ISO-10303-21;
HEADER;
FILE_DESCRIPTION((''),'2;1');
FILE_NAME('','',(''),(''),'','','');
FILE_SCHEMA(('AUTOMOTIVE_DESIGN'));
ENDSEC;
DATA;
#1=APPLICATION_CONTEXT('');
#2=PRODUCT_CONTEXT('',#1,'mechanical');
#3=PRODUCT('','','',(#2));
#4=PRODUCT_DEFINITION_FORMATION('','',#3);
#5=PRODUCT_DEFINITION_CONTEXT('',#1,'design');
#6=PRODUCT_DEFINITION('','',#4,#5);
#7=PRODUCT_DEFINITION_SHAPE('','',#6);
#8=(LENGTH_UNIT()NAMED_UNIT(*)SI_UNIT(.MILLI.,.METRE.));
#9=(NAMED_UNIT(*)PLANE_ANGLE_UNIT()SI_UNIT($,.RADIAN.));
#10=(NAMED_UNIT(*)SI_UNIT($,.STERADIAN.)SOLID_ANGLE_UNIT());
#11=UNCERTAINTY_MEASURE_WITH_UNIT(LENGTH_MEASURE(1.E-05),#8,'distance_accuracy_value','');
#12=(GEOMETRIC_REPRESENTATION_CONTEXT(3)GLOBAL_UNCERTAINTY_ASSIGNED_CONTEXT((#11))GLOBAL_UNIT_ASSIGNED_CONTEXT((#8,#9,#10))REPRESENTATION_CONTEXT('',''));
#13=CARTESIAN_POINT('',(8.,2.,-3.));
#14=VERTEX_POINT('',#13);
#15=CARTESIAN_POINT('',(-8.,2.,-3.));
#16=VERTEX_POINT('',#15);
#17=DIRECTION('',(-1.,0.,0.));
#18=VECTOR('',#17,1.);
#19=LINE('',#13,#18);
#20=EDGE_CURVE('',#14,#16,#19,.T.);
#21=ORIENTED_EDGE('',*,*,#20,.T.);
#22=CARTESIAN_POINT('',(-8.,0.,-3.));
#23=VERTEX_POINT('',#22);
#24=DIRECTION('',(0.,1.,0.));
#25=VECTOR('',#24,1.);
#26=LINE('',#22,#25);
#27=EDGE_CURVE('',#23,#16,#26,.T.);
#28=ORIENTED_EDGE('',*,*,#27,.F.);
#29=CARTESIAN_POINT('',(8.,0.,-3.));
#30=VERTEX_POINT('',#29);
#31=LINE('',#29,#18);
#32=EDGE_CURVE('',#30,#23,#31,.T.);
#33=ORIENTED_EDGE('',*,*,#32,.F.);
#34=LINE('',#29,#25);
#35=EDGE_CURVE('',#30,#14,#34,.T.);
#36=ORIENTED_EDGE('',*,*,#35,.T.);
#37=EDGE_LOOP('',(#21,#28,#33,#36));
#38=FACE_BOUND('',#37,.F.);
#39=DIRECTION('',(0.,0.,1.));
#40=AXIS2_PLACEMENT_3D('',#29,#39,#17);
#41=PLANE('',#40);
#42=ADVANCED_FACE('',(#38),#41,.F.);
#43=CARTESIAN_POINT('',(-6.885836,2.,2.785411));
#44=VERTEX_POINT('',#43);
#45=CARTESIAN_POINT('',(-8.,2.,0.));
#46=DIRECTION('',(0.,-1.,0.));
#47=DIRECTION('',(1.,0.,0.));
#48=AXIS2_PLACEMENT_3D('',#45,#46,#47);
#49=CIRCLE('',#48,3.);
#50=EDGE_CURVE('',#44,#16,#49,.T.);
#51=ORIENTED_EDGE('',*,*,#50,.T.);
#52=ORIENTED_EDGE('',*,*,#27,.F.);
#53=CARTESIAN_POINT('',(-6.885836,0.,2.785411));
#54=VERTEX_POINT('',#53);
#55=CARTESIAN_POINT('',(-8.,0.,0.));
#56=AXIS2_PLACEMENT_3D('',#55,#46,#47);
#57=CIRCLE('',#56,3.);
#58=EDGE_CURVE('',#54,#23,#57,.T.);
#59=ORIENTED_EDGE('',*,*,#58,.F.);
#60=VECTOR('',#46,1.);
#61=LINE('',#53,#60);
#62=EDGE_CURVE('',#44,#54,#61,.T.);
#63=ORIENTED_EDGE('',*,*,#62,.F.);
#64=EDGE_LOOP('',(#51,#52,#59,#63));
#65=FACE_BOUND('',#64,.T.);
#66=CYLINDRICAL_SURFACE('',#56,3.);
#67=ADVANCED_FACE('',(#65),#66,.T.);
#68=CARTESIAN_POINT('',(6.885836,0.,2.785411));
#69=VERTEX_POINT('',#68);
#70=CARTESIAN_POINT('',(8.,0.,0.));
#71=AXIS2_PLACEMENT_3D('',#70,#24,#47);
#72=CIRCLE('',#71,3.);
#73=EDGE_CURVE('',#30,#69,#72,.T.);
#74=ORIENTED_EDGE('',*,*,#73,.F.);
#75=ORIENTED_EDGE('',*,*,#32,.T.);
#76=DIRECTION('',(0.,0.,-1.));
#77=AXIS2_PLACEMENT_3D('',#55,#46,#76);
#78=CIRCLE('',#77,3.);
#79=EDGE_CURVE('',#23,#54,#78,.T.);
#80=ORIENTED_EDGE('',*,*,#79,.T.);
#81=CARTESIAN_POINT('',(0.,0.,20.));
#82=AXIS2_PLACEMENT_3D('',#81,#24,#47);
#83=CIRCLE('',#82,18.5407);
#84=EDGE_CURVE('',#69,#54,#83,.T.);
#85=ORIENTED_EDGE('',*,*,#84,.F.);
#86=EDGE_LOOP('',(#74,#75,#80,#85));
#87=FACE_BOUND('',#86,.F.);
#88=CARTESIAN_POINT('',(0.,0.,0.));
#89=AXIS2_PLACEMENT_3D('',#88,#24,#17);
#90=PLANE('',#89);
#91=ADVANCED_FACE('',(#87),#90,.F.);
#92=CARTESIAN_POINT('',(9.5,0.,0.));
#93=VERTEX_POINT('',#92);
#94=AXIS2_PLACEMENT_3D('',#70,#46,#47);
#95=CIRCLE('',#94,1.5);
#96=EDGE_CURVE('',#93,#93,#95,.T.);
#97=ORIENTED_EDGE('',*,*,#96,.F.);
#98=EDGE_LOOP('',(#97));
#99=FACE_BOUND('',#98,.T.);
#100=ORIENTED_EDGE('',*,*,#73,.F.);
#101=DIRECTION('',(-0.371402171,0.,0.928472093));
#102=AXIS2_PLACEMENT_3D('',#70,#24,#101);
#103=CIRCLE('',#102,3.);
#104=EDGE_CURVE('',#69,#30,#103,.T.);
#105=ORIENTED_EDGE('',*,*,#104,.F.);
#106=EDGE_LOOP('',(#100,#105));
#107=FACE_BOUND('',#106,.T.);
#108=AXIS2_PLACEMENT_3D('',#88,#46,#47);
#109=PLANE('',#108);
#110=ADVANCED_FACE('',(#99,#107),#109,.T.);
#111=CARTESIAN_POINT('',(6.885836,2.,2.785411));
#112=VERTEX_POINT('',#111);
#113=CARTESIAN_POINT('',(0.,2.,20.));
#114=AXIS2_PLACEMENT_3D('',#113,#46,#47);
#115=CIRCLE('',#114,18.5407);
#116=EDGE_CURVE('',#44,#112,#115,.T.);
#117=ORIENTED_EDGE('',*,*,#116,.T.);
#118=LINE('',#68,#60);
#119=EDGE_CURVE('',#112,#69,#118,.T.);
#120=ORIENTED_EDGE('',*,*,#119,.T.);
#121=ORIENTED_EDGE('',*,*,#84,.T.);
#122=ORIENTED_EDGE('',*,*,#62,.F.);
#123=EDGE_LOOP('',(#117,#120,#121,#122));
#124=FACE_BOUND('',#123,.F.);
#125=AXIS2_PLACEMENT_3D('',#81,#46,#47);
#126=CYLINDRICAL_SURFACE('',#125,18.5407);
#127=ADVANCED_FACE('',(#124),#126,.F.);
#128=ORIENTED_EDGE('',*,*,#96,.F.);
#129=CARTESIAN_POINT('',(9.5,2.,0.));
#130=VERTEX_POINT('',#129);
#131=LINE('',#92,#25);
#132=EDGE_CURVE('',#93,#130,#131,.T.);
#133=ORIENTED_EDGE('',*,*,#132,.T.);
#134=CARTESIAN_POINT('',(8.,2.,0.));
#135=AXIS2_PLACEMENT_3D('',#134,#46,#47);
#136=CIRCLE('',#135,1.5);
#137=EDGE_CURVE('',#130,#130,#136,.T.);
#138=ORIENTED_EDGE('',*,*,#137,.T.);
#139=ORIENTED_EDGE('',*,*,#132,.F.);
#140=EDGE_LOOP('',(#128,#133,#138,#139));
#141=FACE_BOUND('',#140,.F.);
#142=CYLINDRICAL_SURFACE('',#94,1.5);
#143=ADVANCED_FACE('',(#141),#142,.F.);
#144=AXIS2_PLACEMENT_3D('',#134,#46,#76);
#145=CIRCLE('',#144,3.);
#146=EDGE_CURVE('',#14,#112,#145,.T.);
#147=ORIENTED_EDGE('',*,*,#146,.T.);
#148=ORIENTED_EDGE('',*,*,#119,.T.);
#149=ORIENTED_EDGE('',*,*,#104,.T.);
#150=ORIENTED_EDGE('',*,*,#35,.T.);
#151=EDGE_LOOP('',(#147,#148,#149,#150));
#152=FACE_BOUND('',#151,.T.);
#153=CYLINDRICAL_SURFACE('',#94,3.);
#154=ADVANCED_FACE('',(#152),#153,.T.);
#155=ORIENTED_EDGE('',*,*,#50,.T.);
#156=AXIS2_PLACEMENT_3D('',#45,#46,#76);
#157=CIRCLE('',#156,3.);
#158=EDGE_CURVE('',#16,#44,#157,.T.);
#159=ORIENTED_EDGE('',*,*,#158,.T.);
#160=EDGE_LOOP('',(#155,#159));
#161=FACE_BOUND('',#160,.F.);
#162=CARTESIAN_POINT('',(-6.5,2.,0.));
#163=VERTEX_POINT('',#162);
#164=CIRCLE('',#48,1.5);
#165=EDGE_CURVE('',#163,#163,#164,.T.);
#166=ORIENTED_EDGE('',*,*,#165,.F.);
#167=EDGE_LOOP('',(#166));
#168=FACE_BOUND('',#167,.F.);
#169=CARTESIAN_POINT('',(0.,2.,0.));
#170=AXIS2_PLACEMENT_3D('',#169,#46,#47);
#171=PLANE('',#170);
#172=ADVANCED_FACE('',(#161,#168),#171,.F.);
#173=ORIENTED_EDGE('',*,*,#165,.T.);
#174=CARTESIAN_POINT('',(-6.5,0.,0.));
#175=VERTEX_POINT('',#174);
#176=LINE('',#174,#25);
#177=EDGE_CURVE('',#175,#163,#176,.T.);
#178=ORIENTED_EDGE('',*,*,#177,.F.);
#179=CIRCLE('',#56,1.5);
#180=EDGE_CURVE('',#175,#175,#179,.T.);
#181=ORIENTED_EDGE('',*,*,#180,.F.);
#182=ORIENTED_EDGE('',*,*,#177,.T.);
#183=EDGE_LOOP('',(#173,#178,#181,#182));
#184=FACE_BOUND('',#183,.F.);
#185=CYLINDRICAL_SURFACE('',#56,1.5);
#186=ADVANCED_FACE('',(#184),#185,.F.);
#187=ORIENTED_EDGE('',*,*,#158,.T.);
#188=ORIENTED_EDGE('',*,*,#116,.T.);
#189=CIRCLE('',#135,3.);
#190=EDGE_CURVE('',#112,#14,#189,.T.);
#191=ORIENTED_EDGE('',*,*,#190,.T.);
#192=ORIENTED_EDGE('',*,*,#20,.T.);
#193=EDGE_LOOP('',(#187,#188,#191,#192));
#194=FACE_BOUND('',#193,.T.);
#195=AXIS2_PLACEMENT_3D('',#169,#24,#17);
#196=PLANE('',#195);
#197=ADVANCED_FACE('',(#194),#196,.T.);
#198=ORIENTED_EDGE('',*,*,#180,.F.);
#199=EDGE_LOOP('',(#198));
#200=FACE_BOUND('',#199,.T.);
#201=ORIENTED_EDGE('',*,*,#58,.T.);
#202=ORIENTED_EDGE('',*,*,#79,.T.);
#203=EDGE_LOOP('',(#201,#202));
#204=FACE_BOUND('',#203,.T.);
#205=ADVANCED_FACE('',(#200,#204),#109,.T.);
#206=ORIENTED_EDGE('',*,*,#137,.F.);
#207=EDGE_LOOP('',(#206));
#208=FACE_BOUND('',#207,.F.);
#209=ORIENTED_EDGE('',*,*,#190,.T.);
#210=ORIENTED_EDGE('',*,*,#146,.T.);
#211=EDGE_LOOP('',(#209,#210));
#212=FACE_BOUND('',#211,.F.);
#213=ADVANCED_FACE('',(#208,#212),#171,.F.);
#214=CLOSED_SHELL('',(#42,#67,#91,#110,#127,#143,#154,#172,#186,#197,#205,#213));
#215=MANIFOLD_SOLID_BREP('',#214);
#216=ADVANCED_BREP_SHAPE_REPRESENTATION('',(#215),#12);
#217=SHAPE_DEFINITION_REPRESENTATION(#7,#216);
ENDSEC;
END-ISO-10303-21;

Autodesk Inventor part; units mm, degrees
ref_plane "YZ Plane" through (0, 0, 0) normal (1, 0, 0) x (0, 1, 0)
ref_plane "XZ Plane" through (0, 0, 0) normal (0, 1, 0) x (-1, 0, 0)
ref_plane "XY Plane" through (0, 0, 0) normal (0, 0, 1) x (1, 0, 0)
sketch "Sketch1" plane through (0, 0, 0) normal (0, 1, 0) x (-1, 0, 0)
  line L0 (-8, -3) -> (8, -3)
  line L1 (8, -3) -> (8, 3)
  line L2 (8, 3) -> (-8, 3)
  line L3 (-8, 3) -> (-8, -3)
  line L4 (-8, -3) -> (8, 3) construction
  line L5 (8, -3) -> (-8, 3) construction
  circle A0 centre (8, 0) radius 3
  circle A1 centre (-8, 0) radius 3
  point P0 (0, 0)
  dimension "d0" = 16
  dimension "d1" = 6
  dimension "d2" = 6
  dimension "d3" = 6
extrude "Extrusion1" add sketch "Sketch1" along normal blind 2
sketch "Sketch2" plane through (0, 2, 0) normal (0, 1, 0) x (1, 0, 0)
  arc A0 (8, -3) -> (8, 3) centre (8, 0) ccw projected
  arc A1 (-8, 3) -> (-8, -3) centre (-8, 0) ccw projected
  circle A2 centre (-8, 0) radius 1.5
  circle A3 centre (8, 0) radius 1.5
  point P0 (0, 0)
  dimension "d6" = 3
  dimension "d7" = 3
extrude "Extrusion2" cut sketch "Sketch2" against normal blind 2
sketch "Sketch3" plane through (0, 0, 0) normal (0, -1, 0) x (1, 0, 0)
  line L0 (-8, 3) -> (8, 3) projected
  line L1 (0, 0) -> (0, 20)
  circle A0 centre (0, 20) radius 18.5407
  dimension "d11" = 20
extrude "Extrusion3" cut sketch "Sketch3" against normal blind 2
sketch "Sketch4" plane through (0, 0, 0) normal (0, -1, 0) x (1, 0, 0)
  arc A0 (-7.3997, 3) -> (7.3997, 3) centre (0, 20) ccw projected
  circle A1 centre (-8, 0) radius 1.5 projected
  circle A2 centre (8, 0) radius 1.5 projected
  circle A3 centre (-8, 0) radius 3
  circle A4 centre (8, 0) radius 3
  point P0 (0, 0)
extrude "Extrusion4" cut sketch "Sketch4" against normal blind 2
sketch "Sketch5" plane through (0, 0, 0) normal (0, -1, 0) x (1, 0, 0)
  arc A0 (8, 3) -> (6.8858, 2.7854) centre (8, 0) ccw projected
  line L0 (7.3997, 3) -> (8, 3) projected
  arc A1 (6.8858, 2.7854) -> (7.3997, 3) centre (0, 20) ccw projected
  point P0 (0, 0)
extrude "Extrusion5" cut sketch "Sketch5" against normal blind 2
sketch "Sketch6" plane through (0, 0, 0) normal (0, -1, 0) x (1, 0, 0)
  arc A0 (-6.8858, 2.7854) -> (-8, 3) centre (-8, 0) ccw projected
  arc A1 (-7.3997, 3) -> (-6.8858, 2.7854) centre (0, 20) ccw projected
  line L0 (-8, 3) -> (-7.3997, 3) projected
  point P0 (0, 0)
extrude "Extrusion6" cut sketch "Sketch6" against normal blind 2
sketch "Sketch7" plane through (0, 0, 0) normal (0, -1, 0) x (1, 0, 0)
  arc A0 (-8, -3) -> (-6.8858, 2.7854) centre (-8, 0) ccw projected
  arc A1 (6.8858, 2.7854) -> (8, -3) centre (8, 0) ccw projected
  circle A2 centre (-8, 0) radius 3
  circle A3 centre (8, 0) radius 3
  circle A4 centre (-8, 0) radius 3
  circle A5 centre (-8, 0) radius 1.5
  circle A6 centre (8, 0) radius 1.5
  point P0 (0, 0)
  dimension "d20" = 6
  dimension "d21" = 3
  dimension "d22" = 3
extrude "Extrusion7" add sketch "Sketch7" against normal blind 2
properties part number "tahlo5(b)"
